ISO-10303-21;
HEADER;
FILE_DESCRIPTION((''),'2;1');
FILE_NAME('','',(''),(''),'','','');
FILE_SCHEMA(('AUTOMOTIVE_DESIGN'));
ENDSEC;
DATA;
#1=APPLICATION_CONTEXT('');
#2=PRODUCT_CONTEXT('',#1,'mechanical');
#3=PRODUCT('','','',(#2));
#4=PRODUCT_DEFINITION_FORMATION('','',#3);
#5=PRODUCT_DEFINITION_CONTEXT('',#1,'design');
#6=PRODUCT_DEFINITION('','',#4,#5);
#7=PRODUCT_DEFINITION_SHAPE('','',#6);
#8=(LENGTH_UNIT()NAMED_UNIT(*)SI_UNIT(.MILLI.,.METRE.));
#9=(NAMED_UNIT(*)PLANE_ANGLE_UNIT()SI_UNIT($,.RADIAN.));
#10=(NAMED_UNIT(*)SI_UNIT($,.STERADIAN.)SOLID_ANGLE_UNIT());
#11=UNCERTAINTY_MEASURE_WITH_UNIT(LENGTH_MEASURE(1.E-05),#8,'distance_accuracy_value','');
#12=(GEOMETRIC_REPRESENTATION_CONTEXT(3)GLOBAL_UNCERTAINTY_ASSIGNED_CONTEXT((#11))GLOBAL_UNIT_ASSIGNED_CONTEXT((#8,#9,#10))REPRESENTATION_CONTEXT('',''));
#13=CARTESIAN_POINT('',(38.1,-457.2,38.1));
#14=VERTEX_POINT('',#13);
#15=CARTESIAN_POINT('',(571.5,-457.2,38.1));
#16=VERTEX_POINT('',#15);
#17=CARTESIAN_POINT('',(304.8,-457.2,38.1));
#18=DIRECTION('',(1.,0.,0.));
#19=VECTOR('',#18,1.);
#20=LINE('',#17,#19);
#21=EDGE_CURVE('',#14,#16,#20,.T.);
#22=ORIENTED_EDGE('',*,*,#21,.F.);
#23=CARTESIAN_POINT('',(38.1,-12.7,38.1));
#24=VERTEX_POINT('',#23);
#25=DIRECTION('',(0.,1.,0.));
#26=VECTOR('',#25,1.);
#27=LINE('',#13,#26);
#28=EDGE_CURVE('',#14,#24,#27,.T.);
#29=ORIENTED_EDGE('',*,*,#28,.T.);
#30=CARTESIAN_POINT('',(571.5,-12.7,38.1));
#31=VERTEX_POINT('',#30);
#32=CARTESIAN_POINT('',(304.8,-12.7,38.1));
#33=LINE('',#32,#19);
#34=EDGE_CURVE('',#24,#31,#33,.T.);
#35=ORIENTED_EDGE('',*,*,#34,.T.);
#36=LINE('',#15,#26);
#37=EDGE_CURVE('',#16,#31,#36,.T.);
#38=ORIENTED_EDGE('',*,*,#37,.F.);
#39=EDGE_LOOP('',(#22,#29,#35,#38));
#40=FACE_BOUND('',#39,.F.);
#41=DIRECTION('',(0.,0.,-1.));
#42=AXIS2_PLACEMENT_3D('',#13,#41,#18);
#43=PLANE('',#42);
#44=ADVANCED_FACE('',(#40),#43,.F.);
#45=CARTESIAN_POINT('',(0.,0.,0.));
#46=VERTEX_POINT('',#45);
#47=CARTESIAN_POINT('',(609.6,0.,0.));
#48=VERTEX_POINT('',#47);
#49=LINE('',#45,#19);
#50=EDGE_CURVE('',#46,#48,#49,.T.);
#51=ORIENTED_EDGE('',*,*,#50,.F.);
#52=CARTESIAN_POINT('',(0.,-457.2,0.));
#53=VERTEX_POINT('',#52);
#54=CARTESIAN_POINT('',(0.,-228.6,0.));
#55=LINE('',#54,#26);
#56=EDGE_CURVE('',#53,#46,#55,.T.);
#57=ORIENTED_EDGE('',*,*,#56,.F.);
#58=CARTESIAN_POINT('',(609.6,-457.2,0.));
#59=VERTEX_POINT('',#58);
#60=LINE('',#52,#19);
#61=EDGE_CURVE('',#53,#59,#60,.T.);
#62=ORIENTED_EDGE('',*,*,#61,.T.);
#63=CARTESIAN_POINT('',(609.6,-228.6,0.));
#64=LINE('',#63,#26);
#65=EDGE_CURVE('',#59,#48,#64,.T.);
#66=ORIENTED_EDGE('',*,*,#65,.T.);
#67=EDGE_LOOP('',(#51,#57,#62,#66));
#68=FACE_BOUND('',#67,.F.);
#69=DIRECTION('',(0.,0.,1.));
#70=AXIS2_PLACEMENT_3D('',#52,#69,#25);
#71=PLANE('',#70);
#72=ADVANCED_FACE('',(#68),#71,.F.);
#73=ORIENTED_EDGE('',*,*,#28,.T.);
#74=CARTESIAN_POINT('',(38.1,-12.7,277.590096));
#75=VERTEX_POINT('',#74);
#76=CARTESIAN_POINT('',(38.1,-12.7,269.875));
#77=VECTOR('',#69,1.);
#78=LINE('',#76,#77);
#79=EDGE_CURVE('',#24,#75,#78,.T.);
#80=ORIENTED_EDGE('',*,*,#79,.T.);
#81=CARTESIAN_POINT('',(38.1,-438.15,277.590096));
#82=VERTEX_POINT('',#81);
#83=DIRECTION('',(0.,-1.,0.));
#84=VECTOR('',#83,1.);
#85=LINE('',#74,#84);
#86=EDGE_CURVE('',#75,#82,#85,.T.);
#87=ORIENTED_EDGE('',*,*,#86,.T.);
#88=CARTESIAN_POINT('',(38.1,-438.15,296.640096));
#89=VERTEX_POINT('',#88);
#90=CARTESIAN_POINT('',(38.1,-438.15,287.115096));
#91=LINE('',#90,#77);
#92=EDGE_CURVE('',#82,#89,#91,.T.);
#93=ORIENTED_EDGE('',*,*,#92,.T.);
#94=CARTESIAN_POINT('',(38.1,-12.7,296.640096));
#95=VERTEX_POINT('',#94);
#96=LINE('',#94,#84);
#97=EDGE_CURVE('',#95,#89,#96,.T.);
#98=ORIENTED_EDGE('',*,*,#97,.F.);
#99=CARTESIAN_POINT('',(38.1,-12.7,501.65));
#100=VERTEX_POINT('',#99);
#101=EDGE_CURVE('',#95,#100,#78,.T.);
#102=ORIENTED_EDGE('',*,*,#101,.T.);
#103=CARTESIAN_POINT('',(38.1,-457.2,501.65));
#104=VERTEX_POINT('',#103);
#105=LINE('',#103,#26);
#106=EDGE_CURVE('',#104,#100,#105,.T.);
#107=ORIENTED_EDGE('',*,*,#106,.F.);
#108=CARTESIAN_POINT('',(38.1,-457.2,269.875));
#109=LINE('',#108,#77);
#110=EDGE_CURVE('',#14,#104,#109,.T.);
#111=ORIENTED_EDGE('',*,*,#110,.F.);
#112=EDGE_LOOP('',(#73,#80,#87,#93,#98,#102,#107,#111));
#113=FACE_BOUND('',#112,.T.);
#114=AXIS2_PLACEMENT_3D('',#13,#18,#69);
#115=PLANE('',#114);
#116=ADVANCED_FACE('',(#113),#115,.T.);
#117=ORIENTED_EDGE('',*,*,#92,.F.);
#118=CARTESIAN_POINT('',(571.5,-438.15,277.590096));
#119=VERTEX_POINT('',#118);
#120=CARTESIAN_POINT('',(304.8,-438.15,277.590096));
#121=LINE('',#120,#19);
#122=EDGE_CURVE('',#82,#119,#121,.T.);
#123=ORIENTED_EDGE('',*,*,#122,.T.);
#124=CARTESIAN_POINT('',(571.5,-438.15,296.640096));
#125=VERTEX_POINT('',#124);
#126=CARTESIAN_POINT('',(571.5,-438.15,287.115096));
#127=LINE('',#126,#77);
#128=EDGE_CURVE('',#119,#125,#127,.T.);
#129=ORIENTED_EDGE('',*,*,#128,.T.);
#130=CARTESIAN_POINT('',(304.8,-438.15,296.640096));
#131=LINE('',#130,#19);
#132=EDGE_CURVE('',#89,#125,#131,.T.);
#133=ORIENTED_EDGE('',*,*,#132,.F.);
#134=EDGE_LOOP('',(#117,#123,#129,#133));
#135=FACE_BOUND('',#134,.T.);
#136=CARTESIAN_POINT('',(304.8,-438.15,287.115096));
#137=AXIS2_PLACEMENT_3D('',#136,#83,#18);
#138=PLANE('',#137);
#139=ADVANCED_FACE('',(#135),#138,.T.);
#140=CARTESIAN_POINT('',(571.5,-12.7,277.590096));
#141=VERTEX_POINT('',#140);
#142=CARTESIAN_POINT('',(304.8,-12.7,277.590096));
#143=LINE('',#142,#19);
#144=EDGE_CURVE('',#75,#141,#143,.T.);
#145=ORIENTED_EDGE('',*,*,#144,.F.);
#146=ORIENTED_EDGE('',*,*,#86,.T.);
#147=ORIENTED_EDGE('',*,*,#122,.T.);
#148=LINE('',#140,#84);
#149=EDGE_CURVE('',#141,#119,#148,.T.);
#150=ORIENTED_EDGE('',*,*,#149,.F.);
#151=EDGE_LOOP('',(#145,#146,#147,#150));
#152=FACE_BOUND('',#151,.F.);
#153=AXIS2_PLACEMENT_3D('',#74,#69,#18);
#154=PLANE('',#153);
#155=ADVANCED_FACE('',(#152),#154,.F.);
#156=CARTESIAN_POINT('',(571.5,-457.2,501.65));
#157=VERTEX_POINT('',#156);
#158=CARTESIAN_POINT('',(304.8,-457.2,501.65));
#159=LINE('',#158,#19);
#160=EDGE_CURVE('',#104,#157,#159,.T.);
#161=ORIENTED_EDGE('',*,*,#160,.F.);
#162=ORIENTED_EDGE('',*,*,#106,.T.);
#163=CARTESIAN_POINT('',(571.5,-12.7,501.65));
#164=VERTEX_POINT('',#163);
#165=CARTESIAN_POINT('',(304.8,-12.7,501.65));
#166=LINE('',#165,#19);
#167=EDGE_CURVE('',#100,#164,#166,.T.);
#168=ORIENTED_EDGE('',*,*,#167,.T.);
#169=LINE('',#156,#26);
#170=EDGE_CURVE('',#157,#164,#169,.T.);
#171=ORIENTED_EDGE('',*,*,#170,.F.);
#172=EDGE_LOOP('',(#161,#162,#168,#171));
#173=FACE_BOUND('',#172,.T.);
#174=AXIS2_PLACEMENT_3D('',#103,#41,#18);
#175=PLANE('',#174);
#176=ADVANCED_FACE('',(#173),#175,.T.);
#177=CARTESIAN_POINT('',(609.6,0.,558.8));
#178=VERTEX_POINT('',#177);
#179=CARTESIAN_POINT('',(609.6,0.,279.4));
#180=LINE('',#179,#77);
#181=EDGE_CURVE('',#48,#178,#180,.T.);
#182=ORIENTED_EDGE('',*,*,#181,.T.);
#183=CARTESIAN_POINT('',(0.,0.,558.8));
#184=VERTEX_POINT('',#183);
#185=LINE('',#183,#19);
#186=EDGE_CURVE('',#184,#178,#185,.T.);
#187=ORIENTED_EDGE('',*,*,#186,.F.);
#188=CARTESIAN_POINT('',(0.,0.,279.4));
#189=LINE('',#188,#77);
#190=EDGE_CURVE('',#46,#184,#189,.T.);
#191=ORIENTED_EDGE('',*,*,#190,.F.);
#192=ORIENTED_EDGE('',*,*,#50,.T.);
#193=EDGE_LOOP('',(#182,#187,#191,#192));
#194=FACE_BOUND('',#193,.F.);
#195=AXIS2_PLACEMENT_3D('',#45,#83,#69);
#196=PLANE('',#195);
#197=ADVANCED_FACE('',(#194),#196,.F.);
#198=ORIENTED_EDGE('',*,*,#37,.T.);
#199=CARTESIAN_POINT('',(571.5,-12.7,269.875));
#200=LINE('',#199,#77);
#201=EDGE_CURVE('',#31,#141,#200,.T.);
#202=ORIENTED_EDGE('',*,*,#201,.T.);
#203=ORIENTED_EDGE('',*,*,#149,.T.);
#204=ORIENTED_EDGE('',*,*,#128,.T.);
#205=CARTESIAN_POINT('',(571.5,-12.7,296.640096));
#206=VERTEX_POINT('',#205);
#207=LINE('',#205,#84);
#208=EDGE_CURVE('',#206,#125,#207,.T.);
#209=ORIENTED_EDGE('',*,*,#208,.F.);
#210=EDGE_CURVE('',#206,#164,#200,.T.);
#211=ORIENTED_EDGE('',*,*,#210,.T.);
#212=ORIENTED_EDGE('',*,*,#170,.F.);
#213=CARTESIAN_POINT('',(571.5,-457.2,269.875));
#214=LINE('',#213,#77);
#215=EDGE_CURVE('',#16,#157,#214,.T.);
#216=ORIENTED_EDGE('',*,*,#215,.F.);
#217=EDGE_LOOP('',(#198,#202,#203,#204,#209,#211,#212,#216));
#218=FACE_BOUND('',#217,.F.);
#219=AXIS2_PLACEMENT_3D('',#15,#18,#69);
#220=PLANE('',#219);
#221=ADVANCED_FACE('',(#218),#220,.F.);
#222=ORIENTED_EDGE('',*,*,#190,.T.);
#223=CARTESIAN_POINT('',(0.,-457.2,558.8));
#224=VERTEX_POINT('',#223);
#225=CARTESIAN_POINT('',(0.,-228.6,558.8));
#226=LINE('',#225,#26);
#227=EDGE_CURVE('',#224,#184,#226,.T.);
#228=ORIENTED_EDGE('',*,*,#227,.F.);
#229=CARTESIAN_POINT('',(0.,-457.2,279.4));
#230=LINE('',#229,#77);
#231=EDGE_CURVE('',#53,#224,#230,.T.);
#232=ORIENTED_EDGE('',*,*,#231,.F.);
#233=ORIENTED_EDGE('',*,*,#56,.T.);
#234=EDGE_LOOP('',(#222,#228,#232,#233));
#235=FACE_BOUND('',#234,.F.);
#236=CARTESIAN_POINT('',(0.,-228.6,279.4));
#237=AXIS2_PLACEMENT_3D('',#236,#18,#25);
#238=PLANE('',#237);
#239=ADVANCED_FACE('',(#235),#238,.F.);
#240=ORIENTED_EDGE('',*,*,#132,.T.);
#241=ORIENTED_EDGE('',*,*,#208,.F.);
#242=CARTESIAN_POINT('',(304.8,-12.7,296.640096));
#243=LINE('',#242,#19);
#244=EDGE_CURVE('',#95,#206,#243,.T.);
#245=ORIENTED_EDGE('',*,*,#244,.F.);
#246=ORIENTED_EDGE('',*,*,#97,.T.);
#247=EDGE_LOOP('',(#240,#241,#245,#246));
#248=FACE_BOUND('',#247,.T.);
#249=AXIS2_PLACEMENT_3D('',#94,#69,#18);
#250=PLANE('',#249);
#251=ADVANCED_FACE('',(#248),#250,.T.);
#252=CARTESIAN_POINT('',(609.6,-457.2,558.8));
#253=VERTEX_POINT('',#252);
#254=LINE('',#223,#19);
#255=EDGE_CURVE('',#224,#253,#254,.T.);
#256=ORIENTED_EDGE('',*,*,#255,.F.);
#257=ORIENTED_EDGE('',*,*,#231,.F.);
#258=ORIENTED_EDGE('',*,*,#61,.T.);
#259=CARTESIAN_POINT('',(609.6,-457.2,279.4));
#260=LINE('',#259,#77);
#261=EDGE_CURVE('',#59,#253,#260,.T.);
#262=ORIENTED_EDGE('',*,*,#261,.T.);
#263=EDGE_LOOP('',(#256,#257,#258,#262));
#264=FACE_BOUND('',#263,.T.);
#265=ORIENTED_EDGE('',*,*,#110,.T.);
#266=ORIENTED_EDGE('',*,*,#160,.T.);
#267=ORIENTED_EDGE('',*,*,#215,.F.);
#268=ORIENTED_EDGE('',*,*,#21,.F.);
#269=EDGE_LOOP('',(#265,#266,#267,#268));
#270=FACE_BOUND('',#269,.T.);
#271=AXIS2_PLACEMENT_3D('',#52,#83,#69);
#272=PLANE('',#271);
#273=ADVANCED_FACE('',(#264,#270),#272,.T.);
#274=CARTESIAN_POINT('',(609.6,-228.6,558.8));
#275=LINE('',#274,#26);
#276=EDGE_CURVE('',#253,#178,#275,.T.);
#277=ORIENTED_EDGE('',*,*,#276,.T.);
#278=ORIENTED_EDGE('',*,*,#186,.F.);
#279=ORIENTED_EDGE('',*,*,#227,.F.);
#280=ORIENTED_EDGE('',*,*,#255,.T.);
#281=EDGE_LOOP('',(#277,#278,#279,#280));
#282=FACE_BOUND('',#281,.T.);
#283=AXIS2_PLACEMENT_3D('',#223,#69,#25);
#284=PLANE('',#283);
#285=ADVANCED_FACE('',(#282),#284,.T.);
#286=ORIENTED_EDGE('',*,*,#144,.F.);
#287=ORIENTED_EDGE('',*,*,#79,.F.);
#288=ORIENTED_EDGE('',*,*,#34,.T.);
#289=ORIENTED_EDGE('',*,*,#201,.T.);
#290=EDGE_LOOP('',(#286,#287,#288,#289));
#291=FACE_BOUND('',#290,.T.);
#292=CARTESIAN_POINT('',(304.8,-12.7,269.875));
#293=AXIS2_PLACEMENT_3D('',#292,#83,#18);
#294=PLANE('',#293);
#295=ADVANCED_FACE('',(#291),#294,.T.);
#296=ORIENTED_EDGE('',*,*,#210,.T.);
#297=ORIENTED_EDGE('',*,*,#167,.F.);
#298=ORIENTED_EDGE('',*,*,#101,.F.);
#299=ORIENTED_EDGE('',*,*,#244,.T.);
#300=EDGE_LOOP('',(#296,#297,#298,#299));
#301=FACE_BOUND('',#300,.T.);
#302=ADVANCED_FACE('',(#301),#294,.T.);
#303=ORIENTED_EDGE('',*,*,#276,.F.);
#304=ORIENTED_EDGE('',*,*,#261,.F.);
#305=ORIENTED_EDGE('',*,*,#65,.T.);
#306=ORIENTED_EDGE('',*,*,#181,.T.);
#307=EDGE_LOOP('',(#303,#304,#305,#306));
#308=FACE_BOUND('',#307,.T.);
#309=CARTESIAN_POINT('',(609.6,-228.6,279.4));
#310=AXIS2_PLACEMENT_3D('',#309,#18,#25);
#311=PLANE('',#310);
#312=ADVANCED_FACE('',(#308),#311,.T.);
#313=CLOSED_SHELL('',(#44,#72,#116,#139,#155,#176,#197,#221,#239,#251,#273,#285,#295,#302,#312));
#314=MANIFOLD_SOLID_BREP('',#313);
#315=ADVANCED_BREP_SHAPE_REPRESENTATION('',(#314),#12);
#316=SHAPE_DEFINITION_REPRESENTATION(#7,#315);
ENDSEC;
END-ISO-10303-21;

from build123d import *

# Parameters (mm, degrees)
F0_W     = 457.2
F0_H     = 558.8
F1_DEPTH = 609.6
F2_W     = 533.4
F2_H     = 463.55
F3_DEPTH = 444.5
F4_W     = 533.4
F4_H     = 19.05
F5_DEPTH = 425.45


# Not quite as in the source:
# - a feature names something its author has since deleted; it is built from what else it names


with BuildPart() as f1:
    # F0 (on Right) → F1 (new body)
    with BuildSketch(Plane.YZ):
        with Locations((-228.6, 279.4)):
            Rectangle(F0_W, F0_H)
    extrude(amount=F1_DEPTH)

    # F2 (on face) → F3 (cut)
    with BuildSketch(Plane.XZ.offset(457.2)):
        with Locations((304.8, 269.875)):
            Rectangle(F2_W, F2_H)
    extrude(amount=-F3_DEPTH, mode=Mode.SUBTRACT)

    # F4 (on face) → F5 (join)
    with BuildSketch(Plane.XZ.offset(12.7)):
        with Locations((304.8, 287.1150959969)):
            Rectangle(F4_W, F4_H)
    extrude(amount=F5_DEPTH)


solid = f1.part
